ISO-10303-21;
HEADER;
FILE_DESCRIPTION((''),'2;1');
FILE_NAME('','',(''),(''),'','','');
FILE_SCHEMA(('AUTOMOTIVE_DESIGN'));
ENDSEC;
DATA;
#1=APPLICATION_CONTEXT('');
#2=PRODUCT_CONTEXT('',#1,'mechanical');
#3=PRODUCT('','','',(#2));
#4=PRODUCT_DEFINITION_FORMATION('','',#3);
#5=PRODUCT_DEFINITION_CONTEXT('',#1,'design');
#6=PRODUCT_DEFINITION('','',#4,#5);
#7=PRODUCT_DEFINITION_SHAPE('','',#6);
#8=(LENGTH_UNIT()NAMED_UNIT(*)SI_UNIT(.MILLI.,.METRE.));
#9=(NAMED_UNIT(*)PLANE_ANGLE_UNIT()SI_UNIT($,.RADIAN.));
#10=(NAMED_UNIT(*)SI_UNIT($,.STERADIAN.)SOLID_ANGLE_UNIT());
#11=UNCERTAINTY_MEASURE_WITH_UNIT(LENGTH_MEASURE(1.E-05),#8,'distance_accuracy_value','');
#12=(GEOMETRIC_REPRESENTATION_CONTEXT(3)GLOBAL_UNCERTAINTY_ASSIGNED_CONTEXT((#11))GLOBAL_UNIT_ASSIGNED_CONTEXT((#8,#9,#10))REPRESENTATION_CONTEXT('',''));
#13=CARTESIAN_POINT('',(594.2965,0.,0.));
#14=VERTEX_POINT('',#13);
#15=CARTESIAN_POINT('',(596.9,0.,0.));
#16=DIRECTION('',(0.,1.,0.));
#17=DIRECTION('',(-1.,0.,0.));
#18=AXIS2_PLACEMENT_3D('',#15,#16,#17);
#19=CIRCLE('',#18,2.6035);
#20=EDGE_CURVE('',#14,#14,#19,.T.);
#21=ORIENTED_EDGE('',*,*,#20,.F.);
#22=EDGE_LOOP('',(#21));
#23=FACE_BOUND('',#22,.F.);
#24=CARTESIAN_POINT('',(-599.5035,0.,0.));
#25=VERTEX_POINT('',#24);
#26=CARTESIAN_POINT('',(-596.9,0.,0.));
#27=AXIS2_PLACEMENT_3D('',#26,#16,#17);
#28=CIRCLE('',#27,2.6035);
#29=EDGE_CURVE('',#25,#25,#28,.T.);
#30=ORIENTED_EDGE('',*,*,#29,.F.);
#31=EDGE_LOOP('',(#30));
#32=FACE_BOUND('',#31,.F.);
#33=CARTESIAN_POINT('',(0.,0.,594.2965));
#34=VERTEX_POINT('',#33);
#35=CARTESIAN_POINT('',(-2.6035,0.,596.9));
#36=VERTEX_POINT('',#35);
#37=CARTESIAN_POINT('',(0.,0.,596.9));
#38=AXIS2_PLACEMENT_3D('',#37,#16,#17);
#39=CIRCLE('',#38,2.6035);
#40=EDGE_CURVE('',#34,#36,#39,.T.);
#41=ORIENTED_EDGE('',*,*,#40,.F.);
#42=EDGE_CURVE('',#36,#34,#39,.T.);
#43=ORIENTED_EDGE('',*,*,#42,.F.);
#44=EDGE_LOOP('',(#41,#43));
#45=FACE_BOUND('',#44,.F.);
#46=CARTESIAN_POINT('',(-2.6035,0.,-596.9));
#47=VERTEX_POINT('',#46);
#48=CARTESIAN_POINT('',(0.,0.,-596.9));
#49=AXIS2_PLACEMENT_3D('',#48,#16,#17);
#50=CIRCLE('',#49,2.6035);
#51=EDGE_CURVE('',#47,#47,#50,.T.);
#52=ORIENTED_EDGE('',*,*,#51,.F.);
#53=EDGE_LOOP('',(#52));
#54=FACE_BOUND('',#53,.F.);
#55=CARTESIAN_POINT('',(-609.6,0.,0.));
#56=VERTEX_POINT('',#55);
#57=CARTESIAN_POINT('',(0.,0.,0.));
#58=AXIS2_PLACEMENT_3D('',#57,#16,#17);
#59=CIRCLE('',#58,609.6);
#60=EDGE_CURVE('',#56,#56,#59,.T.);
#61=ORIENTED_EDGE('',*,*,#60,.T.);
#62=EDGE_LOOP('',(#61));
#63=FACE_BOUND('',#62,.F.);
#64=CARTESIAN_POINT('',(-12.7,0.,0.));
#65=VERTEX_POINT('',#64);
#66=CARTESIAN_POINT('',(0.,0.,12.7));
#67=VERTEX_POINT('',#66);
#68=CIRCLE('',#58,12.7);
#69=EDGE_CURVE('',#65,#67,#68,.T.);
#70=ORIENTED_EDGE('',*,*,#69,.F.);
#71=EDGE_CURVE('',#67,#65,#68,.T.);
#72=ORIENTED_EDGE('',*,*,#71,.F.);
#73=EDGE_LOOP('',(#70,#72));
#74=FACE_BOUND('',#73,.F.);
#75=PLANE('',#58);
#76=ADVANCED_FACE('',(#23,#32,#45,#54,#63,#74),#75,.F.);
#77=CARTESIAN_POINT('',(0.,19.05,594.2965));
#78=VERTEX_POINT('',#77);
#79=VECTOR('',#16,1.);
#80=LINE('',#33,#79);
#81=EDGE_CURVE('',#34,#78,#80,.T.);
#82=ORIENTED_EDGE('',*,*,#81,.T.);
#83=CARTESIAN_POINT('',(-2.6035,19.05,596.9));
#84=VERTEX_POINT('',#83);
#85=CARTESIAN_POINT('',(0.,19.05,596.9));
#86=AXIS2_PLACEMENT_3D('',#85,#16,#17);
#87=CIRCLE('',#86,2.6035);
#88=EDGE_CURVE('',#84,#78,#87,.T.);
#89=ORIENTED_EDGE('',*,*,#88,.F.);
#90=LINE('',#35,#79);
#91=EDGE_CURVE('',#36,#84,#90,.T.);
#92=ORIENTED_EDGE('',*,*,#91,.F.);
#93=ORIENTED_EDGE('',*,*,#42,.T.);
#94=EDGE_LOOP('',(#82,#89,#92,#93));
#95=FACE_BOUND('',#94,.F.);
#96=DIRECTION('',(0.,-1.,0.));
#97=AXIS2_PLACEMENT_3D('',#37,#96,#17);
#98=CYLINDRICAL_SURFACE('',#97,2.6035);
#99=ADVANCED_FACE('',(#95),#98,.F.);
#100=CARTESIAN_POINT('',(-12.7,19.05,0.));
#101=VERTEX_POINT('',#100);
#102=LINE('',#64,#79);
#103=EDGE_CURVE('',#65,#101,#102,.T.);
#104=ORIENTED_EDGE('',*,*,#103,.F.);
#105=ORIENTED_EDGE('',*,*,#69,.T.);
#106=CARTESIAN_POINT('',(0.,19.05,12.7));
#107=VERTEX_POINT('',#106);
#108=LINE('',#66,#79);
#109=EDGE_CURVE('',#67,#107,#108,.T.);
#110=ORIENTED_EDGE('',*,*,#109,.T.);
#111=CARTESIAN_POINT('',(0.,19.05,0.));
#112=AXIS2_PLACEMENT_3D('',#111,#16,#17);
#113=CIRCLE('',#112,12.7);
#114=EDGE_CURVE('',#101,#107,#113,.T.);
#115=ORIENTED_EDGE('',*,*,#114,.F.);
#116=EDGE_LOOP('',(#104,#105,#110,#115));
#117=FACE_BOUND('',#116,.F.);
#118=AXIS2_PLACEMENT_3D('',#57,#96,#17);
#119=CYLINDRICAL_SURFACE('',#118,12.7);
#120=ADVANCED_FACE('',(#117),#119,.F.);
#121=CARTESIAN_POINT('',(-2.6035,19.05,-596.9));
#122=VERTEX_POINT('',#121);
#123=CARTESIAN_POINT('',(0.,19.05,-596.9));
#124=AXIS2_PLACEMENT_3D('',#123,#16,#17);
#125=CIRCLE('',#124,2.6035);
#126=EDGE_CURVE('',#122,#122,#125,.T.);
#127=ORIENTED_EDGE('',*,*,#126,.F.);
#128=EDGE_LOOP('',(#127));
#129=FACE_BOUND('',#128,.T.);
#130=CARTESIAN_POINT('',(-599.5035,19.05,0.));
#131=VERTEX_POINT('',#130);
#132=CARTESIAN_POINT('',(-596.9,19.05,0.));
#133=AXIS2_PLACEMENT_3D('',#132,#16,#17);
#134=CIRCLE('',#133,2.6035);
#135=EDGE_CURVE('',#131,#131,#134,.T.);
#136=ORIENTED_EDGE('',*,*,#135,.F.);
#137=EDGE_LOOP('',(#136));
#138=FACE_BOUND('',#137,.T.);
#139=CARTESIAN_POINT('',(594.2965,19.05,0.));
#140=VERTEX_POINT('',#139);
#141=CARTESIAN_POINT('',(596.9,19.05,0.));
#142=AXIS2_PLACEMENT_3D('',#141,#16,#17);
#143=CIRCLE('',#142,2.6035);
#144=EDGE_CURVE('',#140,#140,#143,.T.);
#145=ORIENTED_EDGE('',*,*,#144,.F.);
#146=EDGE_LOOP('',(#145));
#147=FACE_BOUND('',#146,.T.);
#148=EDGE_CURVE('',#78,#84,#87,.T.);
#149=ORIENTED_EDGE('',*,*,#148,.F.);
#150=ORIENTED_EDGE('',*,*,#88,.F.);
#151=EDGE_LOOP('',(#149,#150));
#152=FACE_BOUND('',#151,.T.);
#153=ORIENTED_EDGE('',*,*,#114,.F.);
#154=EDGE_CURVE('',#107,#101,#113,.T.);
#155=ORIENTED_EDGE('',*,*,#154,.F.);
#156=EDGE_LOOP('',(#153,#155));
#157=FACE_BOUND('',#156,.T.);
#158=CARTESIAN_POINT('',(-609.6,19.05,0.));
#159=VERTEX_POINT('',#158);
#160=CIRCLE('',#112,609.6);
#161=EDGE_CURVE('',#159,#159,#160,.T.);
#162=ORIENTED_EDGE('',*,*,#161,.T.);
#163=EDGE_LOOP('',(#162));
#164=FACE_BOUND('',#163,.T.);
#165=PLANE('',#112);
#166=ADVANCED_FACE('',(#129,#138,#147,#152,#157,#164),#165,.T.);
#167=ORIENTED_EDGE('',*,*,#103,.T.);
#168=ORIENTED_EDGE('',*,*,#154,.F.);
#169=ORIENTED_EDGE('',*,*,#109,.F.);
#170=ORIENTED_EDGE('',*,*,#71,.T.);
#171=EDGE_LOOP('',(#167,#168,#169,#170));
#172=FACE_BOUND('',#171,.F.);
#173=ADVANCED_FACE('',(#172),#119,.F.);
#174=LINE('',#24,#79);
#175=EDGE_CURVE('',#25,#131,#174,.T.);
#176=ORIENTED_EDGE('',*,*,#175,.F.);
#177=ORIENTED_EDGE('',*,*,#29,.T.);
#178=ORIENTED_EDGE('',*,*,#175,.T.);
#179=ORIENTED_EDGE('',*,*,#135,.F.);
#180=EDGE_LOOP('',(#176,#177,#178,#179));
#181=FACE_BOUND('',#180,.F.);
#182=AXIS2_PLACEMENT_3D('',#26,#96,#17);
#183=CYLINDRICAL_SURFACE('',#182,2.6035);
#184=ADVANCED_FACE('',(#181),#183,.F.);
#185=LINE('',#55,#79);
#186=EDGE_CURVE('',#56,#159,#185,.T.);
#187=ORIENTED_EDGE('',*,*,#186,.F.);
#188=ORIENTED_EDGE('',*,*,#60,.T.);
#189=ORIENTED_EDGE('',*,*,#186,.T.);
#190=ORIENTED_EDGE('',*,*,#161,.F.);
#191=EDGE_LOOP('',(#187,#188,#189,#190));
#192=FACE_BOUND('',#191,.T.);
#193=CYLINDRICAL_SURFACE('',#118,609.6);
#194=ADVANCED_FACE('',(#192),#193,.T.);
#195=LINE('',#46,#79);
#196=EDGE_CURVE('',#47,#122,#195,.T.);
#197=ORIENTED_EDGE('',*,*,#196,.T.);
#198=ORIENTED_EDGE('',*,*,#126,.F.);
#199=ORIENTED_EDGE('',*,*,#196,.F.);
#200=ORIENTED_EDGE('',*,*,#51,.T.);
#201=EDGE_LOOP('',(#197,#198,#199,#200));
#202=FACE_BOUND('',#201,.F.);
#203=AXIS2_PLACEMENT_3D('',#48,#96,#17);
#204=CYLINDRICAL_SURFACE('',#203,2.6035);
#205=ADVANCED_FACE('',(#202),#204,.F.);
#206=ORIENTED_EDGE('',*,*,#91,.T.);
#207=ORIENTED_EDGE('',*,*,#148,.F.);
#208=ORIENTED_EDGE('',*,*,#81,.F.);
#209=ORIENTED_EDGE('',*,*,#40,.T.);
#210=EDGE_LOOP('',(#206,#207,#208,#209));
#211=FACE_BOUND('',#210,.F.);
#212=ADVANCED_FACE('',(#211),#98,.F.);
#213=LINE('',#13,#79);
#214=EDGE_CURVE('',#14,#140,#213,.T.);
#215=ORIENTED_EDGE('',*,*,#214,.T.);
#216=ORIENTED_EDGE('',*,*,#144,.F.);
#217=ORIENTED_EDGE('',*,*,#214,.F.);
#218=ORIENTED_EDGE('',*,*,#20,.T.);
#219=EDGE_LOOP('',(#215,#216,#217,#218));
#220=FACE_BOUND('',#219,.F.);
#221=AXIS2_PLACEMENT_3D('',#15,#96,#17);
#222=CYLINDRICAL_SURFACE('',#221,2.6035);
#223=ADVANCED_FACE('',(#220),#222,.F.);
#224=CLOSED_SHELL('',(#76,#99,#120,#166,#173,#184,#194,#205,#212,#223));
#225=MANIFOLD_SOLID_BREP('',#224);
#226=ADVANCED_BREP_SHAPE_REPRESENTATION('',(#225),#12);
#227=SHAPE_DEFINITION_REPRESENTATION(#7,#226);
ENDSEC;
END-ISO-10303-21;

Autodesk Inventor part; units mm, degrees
ref_plane "YZ Plane" through (0, 0, 0) normal (1, 0, 0) x (0, 1, 0)
ref_plane "XZ Plane" through (0, 0, 0) normal (0, 1, 0) x (-1, 0, 0)
ref_plane "XY Plane" through (0, 0, 0) normal (0, 0, 1) x (1, 0, 0)
sketch "Sketch1" plane through (0, 0, 0) normal (0, 1, 0) x (-1, 0, 0)
  circle A0 centre (0, 0) radius 609.6
  circle A1 centre (0, 0) radius 12.7
  circle A2 centre (0, 596.9) radius 2.6035
  line L0 (0, 12.7) -> (0, 594.2965)
  circle A3 centre (-596.9, 0) radius 2.6035
  circle A4 centre (0, -596.9) radius 2.6035
  circle A5 centre (596.9, 0) radius 2.6035
  point P0 (-594.2965, 0)
  point P1 (0, -594.2965)
  point P2 (594.2965, 0)
  dimension "d5" = 25.4
  dimension "d6" = 5.207
  dimension "d0" = 1219.2
  dimension "d7" = 596.9
  dimension "d10" = 360
extrude "Extrusion1" add sketch "Sketch1" along normal blind 19.05
properties part number "bottom" material "Wood (Birch)"
